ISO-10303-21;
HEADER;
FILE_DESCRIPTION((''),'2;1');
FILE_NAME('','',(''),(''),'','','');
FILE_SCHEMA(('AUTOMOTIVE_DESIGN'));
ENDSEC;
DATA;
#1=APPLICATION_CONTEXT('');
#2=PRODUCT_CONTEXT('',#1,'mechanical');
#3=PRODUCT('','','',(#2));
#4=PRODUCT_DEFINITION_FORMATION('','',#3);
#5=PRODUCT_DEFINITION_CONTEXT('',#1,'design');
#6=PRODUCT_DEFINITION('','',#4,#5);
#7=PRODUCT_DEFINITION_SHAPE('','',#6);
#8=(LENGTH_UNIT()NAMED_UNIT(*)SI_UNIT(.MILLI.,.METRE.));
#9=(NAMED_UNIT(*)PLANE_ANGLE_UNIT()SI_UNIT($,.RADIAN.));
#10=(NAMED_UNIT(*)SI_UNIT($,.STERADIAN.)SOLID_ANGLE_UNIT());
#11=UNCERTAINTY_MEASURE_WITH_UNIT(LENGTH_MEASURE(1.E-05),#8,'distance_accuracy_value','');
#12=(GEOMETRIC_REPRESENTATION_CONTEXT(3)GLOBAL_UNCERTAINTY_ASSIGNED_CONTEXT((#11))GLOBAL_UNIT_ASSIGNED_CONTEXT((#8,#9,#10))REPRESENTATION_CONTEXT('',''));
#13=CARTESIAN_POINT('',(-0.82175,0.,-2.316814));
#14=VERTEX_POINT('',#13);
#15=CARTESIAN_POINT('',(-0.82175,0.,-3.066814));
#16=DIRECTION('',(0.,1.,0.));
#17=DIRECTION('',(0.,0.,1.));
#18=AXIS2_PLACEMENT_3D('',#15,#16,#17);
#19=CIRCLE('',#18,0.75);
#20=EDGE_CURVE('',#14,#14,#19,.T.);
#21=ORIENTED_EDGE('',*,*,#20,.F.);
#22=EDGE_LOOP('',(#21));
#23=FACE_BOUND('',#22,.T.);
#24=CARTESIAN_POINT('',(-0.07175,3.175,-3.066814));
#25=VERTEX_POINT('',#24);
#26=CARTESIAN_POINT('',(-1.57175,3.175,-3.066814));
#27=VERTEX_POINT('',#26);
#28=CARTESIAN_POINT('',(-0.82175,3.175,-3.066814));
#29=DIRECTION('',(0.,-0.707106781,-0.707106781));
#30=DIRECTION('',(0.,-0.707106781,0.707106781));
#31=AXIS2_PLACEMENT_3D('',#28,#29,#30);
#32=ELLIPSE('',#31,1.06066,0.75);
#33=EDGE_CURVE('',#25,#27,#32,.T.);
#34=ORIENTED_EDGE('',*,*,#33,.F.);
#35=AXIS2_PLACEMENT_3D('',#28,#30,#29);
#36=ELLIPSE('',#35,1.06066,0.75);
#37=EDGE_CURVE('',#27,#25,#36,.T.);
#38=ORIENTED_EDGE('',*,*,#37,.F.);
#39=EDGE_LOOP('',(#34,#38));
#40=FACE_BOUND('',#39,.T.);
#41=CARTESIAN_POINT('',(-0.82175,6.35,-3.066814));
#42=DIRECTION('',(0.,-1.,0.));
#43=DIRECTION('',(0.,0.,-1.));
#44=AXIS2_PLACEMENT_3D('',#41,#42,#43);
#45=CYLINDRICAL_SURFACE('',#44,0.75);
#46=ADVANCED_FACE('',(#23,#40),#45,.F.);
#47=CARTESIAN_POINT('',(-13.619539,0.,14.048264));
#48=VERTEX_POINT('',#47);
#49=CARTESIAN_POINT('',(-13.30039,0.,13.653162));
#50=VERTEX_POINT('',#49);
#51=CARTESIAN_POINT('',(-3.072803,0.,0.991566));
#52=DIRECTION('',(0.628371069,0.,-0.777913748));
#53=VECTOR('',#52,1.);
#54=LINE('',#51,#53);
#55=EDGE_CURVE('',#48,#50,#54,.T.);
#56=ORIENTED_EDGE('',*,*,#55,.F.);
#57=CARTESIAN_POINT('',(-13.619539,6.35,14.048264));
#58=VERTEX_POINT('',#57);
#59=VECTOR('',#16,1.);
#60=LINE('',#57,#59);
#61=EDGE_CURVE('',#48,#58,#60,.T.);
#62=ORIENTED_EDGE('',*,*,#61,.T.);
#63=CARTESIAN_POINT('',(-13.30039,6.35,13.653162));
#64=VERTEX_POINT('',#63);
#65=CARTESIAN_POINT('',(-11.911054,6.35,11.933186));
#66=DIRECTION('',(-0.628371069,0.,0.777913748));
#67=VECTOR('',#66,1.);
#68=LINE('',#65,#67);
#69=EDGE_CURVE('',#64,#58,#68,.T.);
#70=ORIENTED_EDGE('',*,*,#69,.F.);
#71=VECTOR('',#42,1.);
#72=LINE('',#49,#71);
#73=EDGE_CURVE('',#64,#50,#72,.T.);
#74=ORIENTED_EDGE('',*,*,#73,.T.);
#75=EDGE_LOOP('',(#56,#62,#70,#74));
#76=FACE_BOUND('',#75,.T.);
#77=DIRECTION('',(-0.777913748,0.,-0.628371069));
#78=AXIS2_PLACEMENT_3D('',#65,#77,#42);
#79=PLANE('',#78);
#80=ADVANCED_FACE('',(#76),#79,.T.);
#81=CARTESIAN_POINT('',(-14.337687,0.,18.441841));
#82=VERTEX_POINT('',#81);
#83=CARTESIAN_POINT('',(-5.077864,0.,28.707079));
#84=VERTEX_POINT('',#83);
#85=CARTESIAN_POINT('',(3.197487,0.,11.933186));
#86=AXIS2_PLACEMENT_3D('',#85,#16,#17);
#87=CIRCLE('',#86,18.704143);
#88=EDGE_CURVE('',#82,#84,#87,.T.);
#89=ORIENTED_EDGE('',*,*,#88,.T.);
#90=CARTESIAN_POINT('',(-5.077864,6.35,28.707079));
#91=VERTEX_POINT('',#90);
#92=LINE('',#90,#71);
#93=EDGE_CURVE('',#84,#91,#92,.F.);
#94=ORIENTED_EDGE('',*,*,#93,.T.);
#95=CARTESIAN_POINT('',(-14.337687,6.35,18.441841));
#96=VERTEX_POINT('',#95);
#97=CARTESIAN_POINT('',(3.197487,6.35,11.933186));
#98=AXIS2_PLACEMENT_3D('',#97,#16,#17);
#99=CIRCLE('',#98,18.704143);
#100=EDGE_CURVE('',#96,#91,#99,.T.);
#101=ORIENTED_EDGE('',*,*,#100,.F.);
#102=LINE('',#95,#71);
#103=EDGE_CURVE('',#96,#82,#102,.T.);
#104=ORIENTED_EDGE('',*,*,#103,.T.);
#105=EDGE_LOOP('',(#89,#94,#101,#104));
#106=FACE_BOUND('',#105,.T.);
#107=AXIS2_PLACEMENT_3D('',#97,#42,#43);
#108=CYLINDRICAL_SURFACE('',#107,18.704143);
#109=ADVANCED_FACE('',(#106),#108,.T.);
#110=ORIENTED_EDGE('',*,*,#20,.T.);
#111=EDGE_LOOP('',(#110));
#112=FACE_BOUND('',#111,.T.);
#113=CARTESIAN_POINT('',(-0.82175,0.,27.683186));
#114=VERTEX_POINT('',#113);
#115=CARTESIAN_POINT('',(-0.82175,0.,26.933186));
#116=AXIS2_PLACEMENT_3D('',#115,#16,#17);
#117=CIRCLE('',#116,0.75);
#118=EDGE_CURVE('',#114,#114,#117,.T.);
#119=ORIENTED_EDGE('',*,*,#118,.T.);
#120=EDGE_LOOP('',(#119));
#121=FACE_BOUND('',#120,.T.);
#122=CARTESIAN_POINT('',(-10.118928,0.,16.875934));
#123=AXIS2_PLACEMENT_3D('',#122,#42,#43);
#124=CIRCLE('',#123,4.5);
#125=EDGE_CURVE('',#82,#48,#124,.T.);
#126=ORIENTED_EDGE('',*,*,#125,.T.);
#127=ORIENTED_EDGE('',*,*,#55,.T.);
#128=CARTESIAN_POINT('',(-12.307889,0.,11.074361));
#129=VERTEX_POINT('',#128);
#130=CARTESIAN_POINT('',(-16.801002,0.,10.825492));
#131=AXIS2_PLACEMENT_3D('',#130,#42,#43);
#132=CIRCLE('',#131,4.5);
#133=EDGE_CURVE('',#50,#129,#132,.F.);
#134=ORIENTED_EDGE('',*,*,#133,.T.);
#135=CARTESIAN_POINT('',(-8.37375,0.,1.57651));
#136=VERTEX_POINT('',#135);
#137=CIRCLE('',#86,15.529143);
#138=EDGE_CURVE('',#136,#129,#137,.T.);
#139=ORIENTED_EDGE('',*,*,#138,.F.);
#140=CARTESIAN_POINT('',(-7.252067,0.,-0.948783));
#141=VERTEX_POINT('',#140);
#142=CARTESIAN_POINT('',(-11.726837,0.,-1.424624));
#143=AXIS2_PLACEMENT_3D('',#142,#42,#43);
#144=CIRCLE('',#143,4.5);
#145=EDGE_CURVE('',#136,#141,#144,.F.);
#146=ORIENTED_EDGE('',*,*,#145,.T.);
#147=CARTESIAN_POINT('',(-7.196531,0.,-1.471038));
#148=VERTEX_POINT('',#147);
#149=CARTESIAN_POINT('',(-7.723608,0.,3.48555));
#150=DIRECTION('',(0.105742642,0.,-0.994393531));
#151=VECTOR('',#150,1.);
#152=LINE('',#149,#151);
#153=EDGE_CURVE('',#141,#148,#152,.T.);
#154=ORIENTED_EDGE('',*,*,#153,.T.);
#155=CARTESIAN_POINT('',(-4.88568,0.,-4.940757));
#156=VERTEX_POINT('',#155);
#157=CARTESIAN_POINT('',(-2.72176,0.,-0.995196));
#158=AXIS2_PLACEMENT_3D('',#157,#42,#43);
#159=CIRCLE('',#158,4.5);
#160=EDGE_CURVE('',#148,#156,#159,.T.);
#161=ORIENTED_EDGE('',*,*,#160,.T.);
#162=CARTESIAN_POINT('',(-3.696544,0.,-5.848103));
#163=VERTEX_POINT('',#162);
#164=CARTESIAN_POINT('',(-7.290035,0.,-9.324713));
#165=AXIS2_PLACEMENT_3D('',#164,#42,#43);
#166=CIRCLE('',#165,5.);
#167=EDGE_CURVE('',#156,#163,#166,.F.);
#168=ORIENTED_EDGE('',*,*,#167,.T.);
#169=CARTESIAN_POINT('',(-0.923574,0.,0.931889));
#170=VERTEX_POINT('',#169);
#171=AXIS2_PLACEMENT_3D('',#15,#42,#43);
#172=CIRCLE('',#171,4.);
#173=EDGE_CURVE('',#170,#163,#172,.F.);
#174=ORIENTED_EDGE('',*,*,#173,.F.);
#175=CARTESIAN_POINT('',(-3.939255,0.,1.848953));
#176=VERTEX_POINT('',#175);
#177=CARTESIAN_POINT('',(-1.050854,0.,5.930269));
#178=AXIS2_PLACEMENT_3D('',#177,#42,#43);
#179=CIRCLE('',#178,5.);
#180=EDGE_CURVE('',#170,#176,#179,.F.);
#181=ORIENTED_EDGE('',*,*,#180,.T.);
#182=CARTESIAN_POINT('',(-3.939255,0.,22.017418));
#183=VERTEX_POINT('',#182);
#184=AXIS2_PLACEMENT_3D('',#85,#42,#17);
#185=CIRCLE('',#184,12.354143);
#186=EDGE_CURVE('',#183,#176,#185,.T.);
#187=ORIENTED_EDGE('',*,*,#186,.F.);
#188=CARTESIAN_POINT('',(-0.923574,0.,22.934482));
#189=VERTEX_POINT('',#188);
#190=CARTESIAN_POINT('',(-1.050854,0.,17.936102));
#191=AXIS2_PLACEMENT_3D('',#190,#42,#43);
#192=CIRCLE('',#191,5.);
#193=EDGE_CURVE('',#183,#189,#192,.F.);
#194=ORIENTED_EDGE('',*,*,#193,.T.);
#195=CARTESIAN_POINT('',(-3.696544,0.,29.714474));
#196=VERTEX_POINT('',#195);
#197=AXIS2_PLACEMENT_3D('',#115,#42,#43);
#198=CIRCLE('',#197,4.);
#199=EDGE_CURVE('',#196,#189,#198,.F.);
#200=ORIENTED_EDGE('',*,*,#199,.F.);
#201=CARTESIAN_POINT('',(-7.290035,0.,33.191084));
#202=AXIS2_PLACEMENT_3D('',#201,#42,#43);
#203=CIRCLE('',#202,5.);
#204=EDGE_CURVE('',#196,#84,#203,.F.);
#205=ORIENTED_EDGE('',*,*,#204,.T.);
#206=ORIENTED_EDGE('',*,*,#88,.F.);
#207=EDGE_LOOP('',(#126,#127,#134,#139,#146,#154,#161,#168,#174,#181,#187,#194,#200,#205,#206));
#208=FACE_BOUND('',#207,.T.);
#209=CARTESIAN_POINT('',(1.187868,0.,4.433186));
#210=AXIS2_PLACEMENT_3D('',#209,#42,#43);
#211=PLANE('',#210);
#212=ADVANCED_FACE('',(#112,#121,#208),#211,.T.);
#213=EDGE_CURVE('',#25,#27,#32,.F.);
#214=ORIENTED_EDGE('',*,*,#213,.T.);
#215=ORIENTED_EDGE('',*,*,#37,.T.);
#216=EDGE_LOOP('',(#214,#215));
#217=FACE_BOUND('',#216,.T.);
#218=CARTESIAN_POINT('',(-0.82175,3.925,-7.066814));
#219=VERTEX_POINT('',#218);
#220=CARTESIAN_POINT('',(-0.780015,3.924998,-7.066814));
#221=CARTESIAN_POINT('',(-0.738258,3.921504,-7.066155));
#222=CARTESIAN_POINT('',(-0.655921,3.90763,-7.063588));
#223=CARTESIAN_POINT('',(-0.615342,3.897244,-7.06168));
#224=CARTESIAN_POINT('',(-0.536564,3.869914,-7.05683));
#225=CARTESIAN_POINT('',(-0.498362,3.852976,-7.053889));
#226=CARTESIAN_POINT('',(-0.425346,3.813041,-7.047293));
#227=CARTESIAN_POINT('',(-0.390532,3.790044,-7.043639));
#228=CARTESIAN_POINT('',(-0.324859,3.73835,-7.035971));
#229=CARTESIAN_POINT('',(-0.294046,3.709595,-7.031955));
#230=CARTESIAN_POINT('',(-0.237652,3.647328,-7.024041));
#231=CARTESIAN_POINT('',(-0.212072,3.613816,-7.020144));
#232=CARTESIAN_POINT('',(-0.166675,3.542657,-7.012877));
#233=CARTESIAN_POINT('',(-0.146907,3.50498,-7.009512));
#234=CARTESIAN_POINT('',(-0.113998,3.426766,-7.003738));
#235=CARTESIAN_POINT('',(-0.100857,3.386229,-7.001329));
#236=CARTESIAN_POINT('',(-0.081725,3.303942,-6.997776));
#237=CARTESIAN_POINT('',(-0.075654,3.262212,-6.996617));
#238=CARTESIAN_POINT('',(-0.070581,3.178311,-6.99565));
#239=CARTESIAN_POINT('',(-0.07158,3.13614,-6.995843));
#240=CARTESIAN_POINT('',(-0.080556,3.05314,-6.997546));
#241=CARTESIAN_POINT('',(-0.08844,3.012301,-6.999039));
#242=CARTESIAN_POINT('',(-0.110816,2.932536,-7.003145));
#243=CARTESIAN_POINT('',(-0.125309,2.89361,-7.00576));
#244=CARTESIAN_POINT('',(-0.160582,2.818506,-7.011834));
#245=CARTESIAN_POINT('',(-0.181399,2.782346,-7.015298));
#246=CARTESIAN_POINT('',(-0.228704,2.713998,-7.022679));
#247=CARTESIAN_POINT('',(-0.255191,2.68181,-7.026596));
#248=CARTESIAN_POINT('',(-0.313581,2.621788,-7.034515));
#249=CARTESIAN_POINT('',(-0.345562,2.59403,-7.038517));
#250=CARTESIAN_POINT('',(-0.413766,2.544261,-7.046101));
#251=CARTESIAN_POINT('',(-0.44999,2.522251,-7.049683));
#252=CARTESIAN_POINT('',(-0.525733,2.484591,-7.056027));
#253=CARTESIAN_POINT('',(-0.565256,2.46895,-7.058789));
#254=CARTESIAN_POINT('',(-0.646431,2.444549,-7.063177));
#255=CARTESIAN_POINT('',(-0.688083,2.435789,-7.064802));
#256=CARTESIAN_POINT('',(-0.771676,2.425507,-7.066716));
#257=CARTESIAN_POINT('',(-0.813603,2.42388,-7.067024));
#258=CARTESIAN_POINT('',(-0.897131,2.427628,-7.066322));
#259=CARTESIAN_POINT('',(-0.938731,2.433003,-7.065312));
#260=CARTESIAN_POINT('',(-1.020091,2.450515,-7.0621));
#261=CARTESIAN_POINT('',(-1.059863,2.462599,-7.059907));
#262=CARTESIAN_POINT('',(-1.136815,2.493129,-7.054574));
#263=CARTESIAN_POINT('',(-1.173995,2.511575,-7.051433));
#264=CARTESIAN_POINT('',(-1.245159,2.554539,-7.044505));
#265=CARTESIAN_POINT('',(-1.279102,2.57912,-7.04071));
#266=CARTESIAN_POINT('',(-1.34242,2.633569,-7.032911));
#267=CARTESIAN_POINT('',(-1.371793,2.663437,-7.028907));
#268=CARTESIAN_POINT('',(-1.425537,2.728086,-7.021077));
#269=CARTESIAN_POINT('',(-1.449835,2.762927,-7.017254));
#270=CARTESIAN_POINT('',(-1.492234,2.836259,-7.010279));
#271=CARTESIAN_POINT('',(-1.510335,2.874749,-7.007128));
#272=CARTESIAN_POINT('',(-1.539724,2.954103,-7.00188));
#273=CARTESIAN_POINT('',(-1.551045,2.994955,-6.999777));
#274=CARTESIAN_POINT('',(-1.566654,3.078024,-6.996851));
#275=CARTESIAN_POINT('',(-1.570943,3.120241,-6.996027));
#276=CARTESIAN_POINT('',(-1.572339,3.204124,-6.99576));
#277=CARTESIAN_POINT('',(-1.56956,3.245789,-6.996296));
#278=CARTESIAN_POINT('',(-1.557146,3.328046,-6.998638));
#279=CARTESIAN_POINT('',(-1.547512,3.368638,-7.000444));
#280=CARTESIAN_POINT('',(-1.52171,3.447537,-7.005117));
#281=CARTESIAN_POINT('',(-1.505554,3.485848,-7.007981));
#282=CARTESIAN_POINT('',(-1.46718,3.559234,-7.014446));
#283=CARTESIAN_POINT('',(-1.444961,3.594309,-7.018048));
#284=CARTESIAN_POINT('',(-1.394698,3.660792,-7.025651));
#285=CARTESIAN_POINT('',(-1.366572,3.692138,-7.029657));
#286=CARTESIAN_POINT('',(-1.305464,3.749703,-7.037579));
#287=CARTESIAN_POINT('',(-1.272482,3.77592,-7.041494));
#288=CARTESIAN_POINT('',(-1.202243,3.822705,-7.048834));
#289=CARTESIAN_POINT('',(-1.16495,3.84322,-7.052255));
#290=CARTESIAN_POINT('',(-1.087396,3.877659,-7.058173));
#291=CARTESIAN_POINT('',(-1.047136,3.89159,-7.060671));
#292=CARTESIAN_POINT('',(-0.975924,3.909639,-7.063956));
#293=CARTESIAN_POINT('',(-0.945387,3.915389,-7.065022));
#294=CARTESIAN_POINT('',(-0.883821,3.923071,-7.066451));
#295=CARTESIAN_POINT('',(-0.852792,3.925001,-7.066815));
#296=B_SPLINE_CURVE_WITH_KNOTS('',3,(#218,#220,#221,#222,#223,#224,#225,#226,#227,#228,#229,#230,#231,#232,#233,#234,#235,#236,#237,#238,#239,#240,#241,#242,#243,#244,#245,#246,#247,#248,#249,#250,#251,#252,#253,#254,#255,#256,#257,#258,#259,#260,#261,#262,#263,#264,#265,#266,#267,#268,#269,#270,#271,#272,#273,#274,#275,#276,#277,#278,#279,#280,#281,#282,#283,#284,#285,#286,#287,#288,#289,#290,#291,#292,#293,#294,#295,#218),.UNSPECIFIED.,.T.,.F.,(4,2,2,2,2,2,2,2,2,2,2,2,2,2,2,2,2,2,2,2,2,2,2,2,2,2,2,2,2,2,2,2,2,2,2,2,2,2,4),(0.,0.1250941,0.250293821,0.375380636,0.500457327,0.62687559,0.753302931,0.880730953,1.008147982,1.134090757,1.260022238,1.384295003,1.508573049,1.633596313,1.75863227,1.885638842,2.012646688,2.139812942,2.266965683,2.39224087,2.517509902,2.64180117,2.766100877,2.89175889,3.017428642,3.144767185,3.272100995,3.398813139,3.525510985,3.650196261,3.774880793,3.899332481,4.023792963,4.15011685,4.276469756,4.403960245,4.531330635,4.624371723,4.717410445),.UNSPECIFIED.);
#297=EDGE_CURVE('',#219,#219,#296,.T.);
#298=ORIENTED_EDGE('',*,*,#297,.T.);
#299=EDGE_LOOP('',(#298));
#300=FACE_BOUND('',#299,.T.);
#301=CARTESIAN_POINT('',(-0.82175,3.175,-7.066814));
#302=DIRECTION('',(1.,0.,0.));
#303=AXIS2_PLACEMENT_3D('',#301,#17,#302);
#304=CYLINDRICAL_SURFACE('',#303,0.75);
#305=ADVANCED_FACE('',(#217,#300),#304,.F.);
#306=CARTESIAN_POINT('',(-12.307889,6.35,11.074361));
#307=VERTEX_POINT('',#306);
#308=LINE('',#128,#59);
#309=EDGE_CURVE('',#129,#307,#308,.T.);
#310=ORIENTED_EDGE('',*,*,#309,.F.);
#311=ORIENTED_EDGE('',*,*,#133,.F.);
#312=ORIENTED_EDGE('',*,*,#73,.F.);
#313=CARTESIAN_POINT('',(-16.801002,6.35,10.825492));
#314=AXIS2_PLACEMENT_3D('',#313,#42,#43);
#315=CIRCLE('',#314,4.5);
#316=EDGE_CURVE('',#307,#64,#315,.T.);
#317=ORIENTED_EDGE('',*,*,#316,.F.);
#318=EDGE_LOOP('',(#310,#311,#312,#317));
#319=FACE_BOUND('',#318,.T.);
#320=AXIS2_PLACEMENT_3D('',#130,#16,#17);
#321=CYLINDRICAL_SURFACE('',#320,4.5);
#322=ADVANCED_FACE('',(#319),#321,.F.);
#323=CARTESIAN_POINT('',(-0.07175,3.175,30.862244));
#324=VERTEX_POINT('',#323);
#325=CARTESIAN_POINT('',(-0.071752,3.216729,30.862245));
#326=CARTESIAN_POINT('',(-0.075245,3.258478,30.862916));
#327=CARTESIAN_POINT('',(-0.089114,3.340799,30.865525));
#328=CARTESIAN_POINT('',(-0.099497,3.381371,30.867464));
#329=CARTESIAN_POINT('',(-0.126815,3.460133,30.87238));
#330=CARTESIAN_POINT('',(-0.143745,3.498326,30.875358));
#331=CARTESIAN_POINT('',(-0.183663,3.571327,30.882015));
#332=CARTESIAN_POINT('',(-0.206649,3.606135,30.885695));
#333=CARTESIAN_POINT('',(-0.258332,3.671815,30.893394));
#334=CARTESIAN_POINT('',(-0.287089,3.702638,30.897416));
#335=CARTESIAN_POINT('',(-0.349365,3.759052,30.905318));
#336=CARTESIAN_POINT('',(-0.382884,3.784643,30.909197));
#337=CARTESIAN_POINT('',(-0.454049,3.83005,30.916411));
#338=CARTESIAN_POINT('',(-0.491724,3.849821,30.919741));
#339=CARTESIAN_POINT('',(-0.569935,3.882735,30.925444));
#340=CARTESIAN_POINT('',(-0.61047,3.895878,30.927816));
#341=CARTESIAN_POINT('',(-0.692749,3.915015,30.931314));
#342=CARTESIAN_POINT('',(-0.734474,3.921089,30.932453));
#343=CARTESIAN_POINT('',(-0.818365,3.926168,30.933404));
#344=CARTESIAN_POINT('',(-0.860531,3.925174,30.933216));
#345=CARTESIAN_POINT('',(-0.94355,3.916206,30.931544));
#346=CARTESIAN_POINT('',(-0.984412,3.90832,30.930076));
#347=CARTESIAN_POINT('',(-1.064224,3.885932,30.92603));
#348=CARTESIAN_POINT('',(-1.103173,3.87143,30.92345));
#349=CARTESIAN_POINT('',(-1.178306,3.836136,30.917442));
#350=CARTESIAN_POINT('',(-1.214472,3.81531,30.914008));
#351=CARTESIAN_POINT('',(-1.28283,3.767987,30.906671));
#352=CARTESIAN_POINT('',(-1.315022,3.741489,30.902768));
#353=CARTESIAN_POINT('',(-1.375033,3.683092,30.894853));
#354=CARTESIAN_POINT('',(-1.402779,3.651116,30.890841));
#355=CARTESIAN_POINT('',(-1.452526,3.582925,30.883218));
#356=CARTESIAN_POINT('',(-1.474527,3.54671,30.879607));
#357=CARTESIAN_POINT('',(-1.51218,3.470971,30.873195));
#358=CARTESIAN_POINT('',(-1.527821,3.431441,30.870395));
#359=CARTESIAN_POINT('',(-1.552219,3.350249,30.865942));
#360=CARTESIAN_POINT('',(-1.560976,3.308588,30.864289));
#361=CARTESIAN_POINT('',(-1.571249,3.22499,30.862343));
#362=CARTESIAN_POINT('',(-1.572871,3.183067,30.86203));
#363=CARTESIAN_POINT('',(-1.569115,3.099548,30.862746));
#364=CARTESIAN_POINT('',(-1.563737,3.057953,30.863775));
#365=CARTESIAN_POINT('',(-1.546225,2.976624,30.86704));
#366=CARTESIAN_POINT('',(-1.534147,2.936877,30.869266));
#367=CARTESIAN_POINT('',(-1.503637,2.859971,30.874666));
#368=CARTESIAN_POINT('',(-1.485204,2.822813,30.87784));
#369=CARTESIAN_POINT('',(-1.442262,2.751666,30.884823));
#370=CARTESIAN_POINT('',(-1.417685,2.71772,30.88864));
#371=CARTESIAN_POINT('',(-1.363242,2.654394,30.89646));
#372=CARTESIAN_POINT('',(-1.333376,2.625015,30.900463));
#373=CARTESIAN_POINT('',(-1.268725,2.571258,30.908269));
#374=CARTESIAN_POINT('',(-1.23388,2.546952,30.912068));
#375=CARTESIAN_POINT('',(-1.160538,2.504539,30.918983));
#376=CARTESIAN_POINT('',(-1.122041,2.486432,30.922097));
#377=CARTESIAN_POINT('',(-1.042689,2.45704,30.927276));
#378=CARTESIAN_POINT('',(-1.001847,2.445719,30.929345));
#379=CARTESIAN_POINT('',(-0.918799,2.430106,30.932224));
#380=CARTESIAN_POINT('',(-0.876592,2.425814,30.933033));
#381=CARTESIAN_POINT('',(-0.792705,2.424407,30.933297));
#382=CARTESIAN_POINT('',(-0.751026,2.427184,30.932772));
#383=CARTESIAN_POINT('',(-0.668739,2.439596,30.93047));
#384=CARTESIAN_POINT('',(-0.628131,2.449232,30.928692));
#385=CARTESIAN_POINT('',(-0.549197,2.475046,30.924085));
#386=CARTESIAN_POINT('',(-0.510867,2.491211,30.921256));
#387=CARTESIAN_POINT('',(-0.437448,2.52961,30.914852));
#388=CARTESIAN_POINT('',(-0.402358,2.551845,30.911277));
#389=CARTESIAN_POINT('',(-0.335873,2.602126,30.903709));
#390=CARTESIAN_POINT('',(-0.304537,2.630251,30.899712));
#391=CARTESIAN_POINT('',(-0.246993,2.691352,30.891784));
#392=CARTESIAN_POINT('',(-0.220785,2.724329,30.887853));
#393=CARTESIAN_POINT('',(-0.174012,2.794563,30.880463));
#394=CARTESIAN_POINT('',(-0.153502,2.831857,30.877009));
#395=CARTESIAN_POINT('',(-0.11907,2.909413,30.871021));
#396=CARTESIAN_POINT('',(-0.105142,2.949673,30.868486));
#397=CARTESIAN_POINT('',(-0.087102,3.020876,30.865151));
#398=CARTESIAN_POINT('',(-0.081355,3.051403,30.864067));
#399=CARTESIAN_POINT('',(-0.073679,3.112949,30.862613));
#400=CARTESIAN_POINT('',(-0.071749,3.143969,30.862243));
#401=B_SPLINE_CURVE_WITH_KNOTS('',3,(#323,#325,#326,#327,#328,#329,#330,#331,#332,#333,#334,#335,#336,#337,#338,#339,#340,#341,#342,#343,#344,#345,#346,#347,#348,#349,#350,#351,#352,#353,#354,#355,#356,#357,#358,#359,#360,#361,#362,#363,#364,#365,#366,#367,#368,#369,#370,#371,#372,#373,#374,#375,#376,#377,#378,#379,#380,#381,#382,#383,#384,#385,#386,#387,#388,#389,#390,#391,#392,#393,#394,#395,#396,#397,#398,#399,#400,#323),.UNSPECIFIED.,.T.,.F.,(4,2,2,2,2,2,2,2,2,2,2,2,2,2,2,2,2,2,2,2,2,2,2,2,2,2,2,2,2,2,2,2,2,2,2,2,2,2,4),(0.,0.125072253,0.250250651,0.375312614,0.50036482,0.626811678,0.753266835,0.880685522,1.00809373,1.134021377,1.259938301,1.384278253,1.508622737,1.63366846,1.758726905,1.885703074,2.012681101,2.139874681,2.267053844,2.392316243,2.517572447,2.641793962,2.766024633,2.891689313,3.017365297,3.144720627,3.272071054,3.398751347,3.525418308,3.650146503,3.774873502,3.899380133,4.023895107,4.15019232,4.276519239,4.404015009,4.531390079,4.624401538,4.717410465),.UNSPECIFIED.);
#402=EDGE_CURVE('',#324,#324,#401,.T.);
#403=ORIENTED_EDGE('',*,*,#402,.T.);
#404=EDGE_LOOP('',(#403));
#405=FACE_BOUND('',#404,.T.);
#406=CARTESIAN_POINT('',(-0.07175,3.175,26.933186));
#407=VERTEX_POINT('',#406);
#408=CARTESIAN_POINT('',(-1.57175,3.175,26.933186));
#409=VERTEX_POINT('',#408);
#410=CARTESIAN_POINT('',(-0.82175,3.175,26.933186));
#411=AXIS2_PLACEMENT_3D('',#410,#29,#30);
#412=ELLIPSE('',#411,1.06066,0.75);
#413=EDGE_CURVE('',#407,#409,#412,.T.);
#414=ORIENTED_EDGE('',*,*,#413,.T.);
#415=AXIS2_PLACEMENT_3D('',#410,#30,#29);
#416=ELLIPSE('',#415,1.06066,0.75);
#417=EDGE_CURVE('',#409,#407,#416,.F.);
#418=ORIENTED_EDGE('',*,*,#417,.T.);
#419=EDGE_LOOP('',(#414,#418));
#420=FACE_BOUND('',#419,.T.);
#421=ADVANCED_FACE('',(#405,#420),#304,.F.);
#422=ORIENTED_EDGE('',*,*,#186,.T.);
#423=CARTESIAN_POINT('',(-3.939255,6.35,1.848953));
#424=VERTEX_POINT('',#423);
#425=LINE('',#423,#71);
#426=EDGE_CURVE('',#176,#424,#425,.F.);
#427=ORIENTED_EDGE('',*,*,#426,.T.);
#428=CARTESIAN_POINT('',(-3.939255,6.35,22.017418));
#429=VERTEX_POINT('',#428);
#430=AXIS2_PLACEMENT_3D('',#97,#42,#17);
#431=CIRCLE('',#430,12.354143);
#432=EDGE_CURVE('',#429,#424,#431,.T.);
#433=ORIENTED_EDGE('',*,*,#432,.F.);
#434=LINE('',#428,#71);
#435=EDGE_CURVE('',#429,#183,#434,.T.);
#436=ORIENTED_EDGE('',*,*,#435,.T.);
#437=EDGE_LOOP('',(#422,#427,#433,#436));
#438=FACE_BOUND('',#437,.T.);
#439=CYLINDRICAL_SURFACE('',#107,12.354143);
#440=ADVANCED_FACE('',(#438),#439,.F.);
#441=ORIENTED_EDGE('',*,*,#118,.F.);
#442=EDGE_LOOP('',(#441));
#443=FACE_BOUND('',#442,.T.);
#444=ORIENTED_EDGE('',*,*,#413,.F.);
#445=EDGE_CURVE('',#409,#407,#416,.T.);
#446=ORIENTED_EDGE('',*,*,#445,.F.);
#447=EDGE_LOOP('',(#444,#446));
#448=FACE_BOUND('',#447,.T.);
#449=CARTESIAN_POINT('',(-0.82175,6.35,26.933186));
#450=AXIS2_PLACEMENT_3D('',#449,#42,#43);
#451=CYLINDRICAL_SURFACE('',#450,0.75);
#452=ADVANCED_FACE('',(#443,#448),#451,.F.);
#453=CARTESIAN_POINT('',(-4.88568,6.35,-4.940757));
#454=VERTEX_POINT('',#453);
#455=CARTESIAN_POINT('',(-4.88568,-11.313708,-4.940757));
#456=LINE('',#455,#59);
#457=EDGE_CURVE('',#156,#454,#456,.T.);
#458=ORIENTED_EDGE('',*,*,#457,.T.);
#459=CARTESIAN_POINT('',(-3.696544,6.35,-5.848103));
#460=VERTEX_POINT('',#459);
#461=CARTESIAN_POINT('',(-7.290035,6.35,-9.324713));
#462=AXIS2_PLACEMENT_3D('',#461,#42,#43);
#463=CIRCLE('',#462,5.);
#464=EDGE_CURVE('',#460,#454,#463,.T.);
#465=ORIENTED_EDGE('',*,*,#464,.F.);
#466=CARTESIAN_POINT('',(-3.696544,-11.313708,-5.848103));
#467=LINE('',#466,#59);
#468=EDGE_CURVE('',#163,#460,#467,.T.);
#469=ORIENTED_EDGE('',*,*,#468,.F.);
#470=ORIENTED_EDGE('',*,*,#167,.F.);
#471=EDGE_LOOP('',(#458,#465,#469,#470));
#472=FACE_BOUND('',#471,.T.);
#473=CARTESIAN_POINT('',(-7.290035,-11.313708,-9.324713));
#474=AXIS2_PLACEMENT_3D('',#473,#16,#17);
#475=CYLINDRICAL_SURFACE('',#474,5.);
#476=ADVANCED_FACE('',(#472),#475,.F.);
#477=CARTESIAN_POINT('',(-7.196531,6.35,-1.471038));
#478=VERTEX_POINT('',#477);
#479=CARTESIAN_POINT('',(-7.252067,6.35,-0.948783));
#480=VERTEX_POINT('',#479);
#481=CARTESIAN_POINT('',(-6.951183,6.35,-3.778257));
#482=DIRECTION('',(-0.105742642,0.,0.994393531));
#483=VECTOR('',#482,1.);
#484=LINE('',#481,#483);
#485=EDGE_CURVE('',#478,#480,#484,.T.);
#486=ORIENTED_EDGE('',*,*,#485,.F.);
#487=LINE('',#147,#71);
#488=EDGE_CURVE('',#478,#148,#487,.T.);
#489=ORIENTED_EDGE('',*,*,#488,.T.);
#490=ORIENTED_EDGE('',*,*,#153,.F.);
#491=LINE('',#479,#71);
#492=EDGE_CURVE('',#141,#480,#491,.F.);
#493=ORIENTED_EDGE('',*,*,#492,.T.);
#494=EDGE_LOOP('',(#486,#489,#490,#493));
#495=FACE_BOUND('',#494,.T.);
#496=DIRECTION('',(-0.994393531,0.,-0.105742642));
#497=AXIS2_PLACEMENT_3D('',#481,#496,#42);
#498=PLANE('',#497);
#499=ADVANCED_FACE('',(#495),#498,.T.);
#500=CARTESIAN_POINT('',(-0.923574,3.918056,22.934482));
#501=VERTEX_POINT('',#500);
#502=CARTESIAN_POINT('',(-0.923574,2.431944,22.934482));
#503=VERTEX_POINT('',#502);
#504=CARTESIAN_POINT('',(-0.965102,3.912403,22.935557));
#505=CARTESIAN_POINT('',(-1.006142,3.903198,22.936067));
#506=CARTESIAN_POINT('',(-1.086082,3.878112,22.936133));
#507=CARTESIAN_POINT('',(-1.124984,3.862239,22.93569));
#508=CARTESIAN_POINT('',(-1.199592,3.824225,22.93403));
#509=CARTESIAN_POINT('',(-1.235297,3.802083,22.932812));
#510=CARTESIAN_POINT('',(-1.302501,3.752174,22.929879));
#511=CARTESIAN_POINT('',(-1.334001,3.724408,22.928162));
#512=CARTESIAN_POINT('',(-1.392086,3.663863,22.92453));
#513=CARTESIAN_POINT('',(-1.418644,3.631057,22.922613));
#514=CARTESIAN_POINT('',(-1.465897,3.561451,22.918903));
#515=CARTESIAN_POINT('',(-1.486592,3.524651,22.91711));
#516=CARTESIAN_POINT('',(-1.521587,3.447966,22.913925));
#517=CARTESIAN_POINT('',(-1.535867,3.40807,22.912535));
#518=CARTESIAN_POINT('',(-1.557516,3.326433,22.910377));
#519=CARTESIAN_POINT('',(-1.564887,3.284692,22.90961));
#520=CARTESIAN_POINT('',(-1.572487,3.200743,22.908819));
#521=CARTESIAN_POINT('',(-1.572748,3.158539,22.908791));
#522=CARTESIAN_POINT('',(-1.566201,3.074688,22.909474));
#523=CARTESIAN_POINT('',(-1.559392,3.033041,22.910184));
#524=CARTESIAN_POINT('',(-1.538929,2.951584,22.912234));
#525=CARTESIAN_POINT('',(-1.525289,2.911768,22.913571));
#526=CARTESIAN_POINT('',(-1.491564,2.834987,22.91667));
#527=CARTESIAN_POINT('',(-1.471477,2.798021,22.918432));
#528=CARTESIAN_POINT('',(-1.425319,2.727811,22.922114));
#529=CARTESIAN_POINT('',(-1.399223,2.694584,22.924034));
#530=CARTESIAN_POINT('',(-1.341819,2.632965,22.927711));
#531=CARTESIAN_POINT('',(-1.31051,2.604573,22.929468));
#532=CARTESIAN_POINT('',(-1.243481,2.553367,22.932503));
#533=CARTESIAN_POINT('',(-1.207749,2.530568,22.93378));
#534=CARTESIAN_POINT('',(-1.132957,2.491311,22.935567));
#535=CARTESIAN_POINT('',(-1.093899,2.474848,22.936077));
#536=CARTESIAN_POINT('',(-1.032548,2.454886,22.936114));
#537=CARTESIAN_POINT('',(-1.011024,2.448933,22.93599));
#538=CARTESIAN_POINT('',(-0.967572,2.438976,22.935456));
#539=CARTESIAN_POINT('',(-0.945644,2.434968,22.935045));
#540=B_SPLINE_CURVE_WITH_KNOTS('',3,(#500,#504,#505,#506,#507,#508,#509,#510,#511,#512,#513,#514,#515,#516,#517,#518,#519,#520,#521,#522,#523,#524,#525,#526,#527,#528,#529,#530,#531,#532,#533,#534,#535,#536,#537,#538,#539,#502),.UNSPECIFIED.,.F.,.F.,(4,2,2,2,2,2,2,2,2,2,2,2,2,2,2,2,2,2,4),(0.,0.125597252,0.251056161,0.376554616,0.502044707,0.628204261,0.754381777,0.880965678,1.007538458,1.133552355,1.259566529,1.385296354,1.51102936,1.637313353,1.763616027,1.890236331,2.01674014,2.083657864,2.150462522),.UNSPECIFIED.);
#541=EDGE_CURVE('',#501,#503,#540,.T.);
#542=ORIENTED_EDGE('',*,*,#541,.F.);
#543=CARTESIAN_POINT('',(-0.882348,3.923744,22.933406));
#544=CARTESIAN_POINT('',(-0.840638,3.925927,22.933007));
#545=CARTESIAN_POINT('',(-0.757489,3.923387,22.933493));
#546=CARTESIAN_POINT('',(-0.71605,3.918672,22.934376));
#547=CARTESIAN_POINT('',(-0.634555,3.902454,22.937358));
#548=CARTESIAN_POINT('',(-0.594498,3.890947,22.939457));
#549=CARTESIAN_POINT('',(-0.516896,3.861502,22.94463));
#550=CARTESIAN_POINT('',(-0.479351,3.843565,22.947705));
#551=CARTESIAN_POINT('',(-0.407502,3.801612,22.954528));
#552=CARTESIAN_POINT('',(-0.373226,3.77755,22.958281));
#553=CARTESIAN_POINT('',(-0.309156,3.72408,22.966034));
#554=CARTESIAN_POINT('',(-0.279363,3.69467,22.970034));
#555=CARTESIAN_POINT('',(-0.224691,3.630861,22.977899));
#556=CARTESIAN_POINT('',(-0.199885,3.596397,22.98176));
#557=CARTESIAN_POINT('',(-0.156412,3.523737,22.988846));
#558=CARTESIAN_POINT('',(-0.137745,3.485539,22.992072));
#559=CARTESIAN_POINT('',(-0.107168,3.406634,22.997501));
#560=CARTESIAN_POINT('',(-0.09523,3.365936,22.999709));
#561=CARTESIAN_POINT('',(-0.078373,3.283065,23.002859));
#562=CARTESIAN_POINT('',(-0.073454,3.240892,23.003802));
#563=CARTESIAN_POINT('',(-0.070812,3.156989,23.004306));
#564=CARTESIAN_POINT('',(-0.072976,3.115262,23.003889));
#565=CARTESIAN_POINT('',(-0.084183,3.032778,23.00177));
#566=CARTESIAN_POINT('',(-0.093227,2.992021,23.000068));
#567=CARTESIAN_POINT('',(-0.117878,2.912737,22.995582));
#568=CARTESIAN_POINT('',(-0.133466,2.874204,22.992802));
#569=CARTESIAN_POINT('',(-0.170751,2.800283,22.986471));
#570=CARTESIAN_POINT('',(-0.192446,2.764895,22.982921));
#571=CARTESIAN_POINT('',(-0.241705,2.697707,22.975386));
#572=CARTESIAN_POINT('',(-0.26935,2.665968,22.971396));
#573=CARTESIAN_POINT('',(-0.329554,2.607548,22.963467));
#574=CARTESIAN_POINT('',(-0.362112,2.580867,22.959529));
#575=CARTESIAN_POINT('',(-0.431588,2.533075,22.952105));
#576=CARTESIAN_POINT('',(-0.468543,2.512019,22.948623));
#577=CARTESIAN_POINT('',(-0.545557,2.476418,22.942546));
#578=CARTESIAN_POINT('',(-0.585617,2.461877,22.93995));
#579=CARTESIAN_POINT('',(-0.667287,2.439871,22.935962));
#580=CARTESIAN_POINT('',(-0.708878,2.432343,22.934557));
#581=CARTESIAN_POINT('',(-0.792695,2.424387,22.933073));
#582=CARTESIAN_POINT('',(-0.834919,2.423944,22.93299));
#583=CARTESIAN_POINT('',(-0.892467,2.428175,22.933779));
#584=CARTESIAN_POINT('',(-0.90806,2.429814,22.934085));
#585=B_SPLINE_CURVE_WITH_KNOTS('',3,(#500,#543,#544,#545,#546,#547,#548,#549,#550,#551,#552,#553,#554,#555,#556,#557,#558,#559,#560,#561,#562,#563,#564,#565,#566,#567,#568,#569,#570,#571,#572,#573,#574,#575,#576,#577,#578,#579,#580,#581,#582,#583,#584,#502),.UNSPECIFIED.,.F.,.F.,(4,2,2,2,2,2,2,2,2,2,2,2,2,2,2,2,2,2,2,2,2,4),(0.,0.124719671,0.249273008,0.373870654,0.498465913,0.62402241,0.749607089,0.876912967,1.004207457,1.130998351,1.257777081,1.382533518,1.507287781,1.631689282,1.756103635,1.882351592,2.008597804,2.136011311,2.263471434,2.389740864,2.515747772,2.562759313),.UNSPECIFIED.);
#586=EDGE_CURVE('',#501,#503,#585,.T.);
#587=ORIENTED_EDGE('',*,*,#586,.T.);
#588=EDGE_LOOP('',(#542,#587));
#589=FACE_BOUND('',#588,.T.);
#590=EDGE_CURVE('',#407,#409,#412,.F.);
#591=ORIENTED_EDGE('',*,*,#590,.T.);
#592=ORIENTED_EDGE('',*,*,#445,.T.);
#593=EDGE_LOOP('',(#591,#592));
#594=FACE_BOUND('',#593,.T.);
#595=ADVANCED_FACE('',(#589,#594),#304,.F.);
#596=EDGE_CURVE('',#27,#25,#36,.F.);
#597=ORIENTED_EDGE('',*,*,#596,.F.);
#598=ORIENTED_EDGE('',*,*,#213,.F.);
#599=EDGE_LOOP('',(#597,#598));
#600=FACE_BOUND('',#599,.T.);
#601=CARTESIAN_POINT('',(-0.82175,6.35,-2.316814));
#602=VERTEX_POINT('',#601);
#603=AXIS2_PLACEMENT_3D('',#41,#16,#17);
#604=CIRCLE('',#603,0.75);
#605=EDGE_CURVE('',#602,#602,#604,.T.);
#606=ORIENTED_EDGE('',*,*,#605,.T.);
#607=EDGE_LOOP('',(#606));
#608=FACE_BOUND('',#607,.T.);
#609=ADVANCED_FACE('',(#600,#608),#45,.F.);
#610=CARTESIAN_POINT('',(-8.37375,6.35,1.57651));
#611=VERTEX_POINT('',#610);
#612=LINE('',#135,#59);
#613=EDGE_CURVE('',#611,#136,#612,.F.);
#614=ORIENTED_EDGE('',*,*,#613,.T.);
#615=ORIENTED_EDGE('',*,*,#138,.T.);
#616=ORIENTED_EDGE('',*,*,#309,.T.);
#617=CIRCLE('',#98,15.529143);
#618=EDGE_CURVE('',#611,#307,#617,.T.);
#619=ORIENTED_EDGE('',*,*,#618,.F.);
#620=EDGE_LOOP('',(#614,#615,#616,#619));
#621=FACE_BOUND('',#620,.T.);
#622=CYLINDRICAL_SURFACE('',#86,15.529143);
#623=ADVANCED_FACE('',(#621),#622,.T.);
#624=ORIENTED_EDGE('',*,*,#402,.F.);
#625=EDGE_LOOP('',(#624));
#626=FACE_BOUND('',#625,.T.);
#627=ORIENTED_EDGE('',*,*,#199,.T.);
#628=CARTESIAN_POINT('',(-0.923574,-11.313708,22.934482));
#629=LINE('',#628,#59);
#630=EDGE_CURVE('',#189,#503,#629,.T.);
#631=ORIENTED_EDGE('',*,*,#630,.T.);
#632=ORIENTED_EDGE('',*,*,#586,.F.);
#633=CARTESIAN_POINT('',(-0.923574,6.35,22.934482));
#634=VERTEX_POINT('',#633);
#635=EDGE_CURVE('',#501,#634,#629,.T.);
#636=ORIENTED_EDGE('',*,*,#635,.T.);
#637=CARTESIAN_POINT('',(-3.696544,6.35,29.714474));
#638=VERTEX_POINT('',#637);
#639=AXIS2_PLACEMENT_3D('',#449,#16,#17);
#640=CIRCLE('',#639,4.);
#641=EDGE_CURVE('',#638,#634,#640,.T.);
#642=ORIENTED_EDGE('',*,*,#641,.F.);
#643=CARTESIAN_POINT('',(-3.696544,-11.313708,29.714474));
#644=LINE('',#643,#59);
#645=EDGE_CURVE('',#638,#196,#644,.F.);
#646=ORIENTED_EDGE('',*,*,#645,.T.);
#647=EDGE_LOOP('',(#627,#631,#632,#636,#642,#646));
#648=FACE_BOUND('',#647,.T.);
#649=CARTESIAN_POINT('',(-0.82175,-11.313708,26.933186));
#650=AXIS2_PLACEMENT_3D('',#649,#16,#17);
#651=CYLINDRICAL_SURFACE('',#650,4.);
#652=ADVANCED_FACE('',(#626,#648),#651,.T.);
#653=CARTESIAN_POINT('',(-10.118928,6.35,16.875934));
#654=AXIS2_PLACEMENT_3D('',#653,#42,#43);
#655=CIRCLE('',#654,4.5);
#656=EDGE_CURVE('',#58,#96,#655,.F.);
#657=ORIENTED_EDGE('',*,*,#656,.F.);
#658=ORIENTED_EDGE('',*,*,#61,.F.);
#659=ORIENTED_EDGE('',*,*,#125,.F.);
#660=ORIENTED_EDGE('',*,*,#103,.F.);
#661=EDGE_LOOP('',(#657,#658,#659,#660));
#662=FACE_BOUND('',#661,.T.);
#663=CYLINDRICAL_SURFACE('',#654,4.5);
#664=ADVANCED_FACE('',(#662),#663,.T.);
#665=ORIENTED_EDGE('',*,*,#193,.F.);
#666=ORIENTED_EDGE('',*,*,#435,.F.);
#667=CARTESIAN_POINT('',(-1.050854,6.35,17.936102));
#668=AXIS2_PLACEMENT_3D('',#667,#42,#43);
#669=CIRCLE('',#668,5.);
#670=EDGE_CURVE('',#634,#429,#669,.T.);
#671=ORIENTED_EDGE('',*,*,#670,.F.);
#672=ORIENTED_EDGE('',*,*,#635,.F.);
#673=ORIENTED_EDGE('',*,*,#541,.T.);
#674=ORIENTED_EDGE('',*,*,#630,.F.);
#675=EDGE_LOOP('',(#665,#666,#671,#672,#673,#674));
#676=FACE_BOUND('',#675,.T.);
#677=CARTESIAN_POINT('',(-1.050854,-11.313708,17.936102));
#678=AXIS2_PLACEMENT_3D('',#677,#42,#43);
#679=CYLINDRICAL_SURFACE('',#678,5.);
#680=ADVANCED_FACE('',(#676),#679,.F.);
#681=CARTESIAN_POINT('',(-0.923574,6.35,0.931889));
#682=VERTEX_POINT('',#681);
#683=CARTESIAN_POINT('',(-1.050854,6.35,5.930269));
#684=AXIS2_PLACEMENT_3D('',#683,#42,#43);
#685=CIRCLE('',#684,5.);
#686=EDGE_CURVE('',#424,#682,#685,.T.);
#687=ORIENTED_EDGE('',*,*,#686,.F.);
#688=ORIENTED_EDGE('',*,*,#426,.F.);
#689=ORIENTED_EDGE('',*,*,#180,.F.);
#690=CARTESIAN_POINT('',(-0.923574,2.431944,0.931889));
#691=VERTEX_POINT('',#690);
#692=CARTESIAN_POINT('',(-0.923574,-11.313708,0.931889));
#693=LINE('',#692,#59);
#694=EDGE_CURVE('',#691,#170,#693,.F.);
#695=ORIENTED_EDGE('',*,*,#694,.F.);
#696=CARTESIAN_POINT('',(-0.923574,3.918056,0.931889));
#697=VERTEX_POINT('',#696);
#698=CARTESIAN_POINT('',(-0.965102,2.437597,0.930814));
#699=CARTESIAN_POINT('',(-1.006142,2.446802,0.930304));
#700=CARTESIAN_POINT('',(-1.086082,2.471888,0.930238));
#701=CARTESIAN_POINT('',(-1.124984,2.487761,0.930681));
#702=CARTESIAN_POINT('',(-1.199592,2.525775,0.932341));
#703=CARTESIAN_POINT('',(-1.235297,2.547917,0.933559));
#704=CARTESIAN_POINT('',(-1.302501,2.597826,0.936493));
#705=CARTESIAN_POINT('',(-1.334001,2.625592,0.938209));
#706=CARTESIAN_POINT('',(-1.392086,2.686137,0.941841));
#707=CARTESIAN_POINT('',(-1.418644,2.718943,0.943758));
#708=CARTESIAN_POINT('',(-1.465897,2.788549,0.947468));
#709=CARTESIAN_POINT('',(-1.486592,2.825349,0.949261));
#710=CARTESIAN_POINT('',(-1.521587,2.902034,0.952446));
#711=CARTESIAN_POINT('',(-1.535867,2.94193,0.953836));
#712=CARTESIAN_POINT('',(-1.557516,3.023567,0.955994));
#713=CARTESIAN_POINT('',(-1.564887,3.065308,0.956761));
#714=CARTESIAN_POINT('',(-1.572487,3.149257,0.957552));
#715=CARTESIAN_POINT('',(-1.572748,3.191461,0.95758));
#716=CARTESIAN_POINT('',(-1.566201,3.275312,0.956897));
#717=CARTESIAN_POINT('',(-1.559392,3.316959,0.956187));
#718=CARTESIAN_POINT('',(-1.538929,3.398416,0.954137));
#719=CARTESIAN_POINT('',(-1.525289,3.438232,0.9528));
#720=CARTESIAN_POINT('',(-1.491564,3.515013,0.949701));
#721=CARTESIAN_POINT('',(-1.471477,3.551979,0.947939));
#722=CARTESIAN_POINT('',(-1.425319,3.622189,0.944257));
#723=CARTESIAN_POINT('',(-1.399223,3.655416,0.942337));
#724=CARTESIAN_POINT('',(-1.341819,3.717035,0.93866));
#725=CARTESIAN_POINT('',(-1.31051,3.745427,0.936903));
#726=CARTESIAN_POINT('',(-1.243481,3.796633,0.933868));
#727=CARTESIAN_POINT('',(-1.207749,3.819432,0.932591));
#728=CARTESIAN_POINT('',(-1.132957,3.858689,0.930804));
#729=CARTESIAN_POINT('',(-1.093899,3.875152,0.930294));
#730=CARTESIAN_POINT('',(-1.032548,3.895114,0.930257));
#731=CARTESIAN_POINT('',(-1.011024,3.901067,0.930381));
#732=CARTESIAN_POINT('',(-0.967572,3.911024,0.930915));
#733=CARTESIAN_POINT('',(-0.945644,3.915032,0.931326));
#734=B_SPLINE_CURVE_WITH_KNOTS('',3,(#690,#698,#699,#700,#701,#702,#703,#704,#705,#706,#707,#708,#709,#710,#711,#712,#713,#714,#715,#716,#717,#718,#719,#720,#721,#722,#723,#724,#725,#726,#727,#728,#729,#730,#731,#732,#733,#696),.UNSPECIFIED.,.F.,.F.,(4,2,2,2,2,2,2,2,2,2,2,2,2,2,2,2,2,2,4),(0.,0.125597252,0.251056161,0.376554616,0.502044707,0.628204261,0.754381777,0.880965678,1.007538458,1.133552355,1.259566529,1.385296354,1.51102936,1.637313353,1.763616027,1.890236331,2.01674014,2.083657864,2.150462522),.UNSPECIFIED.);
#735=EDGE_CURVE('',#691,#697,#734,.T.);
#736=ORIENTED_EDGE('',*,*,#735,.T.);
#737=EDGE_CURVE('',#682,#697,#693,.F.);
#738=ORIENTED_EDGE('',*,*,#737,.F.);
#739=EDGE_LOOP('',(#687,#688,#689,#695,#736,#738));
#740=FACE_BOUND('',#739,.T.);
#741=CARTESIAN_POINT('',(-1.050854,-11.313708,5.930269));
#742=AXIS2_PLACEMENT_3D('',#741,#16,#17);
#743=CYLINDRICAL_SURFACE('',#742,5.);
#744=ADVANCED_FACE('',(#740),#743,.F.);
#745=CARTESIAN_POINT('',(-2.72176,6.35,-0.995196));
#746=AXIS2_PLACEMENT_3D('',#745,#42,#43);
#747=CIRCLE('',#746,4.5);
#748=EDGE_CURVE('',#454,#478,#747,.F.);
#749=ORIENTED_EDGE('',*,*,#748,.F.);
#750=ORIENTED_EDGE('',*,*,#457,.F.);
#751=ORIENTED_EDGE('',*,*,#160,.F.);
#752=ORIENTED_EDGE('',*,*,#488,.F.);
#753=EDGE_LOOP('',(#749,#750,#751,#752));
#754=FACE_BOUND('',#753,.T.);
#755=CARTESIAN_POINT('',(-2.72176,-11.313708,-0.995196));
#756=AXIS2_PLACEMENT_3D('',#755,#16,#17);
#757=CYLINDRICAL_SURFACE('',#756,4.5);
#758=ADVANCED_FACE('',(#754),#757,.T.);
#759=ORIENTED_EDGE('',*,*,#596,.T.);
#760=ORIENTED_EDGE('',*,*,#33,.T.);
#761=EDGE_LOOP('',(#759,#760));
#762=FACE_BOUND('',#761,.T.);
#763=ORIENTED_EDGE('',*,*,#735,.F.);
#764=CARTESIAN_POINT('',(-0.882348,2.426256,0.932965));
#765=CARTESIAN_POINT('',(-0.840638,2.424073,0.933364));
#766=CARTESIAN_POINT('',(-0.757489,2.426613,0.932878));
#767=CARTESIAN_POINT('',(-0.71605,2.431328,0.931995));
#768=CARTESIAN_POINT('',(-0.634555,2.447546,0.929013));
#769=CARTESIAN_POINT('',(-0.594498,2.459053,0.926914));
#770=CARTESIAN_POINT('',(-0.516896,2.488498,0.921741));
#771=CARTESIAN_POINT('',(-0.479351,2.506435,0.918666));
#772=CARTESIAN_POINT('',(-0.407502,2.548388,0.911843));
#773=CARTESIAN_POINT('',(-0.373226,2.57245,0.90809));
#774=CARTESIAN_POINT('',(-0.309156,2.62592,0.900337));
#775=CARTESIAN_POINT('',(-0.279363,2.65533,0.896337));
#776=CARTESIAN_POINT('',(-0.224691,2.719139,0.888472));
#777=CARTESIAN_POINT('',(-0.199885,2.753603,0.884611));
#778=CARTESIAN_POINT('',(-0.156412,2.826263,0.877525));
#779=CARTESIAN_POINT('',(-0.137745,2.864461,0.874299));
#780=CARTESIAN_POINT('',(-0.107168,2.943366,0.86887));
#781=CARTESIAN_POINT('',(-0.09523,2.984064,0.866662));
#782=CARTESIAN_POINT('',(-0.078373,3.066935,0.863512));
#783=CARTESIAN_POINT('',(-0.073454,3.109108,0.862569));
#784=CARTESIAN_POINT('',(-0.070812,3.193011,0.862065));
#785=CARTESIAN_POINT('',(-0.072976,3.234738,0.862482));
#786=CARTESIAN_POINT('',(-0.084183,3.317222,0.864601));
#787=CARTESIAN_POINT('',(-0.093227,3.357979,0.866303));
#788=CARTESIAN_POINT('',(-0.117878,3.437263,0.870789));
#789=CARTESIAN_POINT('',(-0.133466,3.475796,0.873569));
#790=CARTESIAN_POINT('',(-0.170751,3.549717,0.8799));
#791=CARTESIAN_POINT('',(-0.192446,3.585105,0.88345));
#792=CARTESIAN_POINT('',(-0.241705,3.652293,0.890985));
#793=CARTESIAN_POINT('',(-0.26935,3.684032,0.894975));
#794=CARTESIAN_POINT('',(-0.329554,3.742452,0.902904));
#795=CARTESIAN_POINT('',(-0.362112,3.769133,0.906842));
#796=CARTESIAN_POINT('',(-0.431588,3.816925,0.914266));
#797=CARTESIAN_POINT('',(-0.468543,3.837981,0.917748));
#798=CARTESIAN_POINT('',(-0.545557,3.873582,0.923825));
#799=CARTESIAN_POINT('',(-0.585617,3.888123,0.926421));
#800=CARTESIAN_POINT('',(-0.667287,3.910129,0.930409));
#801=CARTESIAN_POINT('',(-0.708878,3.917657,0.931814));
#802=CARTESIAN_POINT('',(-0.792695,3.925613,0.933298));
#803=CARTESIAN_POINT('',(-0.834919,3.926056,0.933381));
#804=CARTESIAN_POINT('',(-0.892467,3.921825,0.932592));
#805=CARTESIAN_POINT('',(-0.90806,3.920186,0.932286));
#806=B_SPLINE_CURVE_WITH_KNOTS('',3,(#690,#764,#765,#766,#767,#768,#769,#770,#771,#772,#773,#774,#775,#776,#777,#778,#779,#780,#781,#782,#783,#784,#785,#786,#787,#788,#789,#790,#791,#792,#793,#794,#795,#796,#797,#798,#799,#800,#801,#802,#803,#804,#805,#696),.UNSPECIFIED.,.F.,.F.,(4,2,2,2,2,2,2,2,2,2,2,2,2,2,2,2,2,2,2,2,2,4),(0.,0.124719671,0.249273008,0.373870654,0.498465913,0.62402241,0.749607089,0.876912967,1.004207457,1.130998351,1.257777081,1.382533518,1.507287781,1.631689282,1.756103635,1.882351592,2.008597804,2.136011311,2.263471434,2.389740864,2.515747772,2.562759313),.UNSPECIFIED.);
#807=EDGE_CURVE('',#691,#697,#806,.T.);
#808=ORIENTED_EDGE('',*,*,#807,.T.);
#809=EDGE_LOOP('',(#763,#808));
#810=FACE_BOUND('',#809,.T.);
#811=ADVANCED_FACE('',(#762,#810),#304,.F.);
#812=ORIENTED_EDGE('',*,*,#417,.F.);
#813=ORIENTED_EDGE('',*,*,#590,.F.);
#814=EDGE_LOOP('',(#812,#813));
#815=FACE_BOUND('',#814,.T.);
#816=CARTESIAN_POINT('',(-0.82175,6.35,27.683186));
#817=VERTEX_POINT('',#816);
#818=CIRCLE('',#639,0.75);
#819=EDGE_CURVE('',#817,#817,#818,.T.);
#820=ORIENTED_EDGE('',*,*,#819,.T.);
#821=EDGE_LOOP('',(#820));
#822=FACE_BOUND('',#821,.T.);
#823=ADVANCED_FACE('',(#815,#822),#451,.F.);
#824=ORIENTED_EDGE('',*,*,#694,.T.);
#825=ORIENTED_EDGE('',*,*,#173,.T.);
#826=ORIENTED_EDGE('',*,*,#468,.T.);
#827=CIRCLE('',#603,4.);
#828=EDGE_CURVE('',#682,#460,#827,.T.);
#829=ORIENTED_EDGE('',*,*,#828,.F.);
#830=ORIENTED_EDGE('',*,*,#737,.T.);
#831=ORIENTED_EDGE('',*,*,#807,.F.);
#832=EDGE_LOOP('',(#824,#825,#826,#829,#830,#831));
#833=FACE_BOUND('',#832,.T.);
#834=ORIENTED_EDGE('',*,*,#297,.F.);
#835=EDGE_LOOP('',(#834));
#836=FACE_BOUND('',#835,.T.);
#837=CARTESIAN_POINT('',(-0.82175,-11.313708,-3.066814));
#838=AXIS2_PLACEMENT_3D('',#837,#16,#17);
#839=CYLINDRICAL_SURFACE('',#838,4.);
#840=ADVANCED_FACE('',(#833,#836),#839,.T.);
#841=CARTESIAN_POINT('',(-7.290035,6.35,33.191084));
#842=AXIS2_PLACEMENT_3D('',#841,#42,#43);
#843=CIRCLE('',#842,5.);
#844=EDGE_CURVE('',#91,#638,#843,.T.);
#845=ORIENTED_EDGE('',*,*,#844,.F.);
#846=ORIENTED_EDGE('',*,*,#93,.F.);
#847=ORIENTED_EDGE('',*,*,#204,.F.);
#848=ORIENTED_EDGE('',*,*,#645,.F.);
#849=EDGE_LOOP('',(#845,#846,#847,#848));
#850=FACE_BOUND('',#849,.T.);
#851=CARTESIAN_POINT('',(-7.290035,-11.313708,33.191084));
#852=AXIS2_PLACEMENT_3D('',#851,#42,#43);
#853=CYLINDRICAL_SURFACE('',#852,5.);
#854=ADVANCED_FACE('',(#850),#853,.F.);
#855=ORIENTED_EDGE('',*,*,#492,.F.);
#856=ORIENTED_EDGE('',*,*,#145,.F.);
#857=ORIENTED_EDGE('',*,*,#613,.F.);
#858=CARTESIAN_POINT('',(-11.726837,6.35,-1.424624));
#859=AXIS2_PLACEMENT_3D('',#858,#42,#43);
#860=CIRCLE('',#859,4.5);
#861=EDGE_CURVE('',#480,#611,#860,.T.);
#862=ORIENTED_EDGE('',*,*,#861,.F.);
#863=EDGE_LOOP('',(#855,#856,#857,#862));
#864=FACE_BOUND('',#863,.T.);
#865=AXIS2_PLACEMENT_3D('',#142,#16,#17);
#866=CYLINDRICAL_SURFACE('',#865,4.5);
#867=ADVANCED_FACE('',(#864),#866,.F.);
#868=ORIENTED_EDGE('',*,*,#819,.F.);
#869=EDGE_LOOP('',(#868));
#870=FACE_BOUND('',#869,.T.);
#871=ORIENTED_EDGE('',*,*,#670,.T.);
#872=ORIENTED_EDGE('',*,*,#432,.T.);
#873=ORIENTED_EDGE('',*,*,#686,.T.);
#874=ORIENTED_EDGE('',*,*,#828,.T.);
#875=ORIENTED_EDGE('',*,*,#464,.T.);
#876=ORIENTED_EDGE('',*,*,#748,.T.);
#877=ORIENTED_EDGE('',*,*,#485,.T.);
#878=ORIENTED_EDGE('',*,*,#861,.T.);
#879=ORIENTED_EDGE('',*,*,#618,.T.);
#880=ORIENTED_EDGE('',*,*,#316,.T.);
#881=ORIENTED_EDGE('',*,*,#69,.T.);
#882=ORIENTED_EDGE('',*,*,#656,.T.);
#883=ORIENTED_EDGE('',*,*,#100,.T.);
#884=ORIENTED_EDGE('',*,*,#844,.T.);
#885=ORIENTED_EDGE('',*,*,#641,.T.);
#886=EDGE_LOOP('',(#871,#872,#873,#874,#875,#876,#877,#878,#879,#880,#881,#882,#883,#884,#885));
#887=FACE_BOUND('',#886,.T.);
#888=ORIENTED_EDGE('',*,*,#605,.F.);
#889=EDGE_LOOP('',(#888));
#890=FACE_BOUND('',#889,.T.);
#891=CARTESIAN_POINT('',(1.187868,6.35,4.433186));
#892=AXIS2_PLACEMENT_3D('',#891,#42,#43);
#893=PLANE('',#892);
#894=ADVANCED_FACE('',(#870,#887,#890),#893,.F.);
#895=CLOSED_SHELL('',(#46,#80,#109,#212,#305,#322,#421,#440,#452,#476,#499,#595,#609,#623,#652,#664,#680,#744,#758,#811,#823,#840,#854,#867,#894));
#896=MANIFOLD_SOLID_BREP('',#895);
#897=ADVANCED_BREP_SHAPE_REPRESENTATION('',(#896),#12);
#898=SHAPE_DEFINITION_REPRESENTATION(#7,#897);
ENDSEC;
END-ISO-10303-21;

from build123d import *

# Parameters (mm, degrees)
SKETCH1_R               = 0.75
BOSS_EXTRUDE1_DEPTH     = 6.35
SKETCH2_R               = 4
SKETCH2_R_2             = 1.5
BOSS_EXTRUDE2_DEPTH     = 6.35
FILLET1_R               = 5
CUT_EXTRUDE1_DEPTH      = 36.18011987
CUT_EXTRUDE1_DEPTH_BACK = 36.18011987
FILLET2_R               = 4.5
CUT_EXTRUDE2_DEPTH      = 35.797952793
CUT_EXTRUDE2_DEPTH_BACK = 35.797952793
SKETCH5_R               = 0.75


with BuildPart() as part:
    # Sketch1 → Boss-Extrude1 (new body)
    with BuildSketch(Plane(origin=(0, 0, 0), x_dir=(1, 0, 0), z_dir=(0, 1, 0))):
        with BuildLine():
            ThreePointArc((0, 0), (-9.156655288, -11.933185502), (0, -23.866371003))
            ThreePointArc((0, -23.866371003), (2.24506403, -27.75493597), (-1.643500936, -30))
            ThreePointArc((-1.643500936, -30), (-15.506655288, -11.933185502), (-1.643500936, 6.133628997))
            ThreePointArc((-1.643500936, 6.133628997), (2.24506403, 3.888564967), (0, 0))
        make_face()
        with Locations(Location((-0.821750468, 3.066814498, 0), (0, 0, 270))):
            Circle(SKETCH1_R, mode=Mode.SUBTRACT)
        with Locations(Location((-0.821750468, -26.933185502, 0), (0, 0, 270))):
            Circle(SKETCH1_R, mode=Mode.SUBTRACT)
    extrude(amount=BOSS_EXTRUDE1_DEPTH)

    # Sketch2 → Boss-Extrude2 (add)
    # profile 1 of 2: a face of its own
    with BuildSketch(Plane(origin=(0, 6.35, 0), x_dir=(1, 0, 0), z_dir=(0, 1, 0))):
        with Locations((-0.821750468, 3.066814498)):
            Circle(SKETCH2_R)
        with Locations((-0.821750468, 3.066814498)):
            Circle(SKETCH2_R_2, mode=Mode.SUBTRACT)
    # profile 2 of 2: a face of its own
    with BuildSketch(Plane(origin=(0, 6.35, 0), x_dir=(1, 0, 0), z_dir=(0, 1, 0))):
        with Locations((-0.821750468, -26.933185502)):
            Circle(SKETCH2_R)
        with Locations((-0.821750468, -26.933185502)):
            Circle(SKETCH2_R_2, mode=Mode.SUBTRACT)
    extrude(amount=-BOSS_EXTRUDE2_DEPTH)

    # Fillet1
    fillet1_edges = [part.edges().sort_by_distance(p)[0] for p in [
        (-2.038682942, 3.175, 0.743575948),
        (-4.166745827, 3.175, -5.260215066),
        (-2.038682942, 3.175, 23.122795055),
        (-4.166745827, 3.175, 29.126586069),
    ]]
    fillet(fillet1_edges, radius=FILLET1_R)

    # Sketch4 → Cut-Extrude1 (cut, two sides: drawn at the far end of the back side and taken through both)
    with BuildSketch(Plane(origin=(0, 6.35, 0), x_dir=(1, 0, 0), z_dir=(0, 1, 0)).offset(-CUT_EXTRUDE1_DEPTH_BACK)):
        with BuildLine():
            Line((-7.783274695, -0.952423388), (-10.028338726, 1.292640642))
            ThreePointArc((-10.028338726, 1.292640642), (-14.082887201, -4.775419971), (-15.506655288, -11.933185502))
            Line((-15.506655288, -11.933185502), (-12.331655288, -11.933185502))
            ThreePointArc((-12.331655288, -11.933185502), (-11.149569685, -5.990439869), (-7.783274695, -0.952423388))
        make_face()
    extrude(amount=CUT_EXTRUDE1_DEPTH + CUT_EXTRUDE1_DEPTH_BACK, mode=Mode.SUBTRACT)

    # Chamfer1
    # the kernel refuses this chamfer: 3.25 mm, written as the material it takes off along each edge
    with BuildSketch(Plane(origin=(-15.506655288, -10.121546279, 11.933185502), x_dir=(0.9996220644729643, 0, -0.02749051143228412), z_dir=(0, 1, 0))) as chamfer1_piece_1_section:
        with BuildLine():
            Line((3.678679732, 0), (0.225552245, -4.042330768))
            Line((0.225552245, -4.042330768), (0.161654076, -4.054248153))
            ThreePointArc((0.161654076, -4.054248153), (-0.010664321, -2.031175025), (-0.064975434, 0.001786883))
            Line((-0.064975434, 0.001786883), (0.001786883, 0.064975434))
            ThreePointArc((0.001786883, 0.064975434), (1.839736708, 0.014430151), (3.680466615, 0.064975434))
            Line((3.680466615, 0.064975434), (3.678679732, 0))
        make_face()
    chamfer1_piece_1 = extrude(amount=26.593092558, mode=Mode.PRIVATE)
    chamfer1_piece_1 = chamfer1_piece_1 - Plane(origin=(3.197487418, 3.175, 11.933185502), x_dir=(-1, 0, 0), z_dir=(0, -1, 0)) * Cylinder(15.529142706, 70, mode=Mode.PRIVATE)
    add(chamfer1_piece_1, mode=Mode.SUBTRACT)
    with BuildSketch(Plane(origin=(-10.028338726, -10.121546279, -1.292640642), x_dir=(0.7634460432280789, 0, -0.6458716119163239), z_dir=(0, 1, 0))) as chamfer1_piece_2_section:
        with BuildLine():
            Line((4.048618512, 0), (0.204942617, -3.672966525))
            Line((0.204942617, -3.672966525), (0.140167642, -3.678370474))
            ThreePointArc((0.140167642, -3.678370474), (0.088085677, -1.837683405), (-0.064774975, -0.005403949))
            Line((-0.064774975, -0.005403949), (-0.005403949, 0.064774975))
            ThreePointArc((-0.005403949, 0.064774975), (2.027426371, 0.123806379), (4.056957562, 0.064462859))
            Line((4.056957562, 0.064462859), (4.048618512, 0))
        make_face()
    chamfer1_piece_2 = extrude(amount=26.593092558, mode=Mode.PRIVATE)
    chamfer1_piece_2 = chamfer1_piece_2 - Plane(origin=(3.197487418, 3.175, 11.933185502), x_dir=(-1, 0, 0), z_dir=(0, -1, 0)) * Cylinder(15.529142706, 70, mode=Mode.PRIVATE)
    add(chamfer1_piece_2, mode=Mode.SUBTRACT)

    # Fillet2
    fillet2_edges = [part.edges().sort_by_distance(p)[0] for p in [
        (-7.416497134, 3.175, 0.597507087),
        (-12.32326811, 3.175, 12.443500126),
        (-6.951183486, 3.175, -3.778257247),
        (-15.088374308, 3.175, 15.866659195),
    ]]
    fillet(fillet2_edges, radius=FILLET2_R)

    # Sketch5 → Cut-Extrude2 (cut, two sides: drawn at the far end of the back side and taken through both)
    with BuildSketch(Plane.XY.offset(-CUT_EXTRUDE2_DEPTH_BACK)):
        with Locations((-0.821750468, 3.175)):
            Circle(SKETCH5_R)
    extrude(amount=CUT_EXTRUDE2_DEPTH + CUT_EXTRUDE2_DEPTH_BACK, mode=Mode.SUBTRACT)


solid = part.part
